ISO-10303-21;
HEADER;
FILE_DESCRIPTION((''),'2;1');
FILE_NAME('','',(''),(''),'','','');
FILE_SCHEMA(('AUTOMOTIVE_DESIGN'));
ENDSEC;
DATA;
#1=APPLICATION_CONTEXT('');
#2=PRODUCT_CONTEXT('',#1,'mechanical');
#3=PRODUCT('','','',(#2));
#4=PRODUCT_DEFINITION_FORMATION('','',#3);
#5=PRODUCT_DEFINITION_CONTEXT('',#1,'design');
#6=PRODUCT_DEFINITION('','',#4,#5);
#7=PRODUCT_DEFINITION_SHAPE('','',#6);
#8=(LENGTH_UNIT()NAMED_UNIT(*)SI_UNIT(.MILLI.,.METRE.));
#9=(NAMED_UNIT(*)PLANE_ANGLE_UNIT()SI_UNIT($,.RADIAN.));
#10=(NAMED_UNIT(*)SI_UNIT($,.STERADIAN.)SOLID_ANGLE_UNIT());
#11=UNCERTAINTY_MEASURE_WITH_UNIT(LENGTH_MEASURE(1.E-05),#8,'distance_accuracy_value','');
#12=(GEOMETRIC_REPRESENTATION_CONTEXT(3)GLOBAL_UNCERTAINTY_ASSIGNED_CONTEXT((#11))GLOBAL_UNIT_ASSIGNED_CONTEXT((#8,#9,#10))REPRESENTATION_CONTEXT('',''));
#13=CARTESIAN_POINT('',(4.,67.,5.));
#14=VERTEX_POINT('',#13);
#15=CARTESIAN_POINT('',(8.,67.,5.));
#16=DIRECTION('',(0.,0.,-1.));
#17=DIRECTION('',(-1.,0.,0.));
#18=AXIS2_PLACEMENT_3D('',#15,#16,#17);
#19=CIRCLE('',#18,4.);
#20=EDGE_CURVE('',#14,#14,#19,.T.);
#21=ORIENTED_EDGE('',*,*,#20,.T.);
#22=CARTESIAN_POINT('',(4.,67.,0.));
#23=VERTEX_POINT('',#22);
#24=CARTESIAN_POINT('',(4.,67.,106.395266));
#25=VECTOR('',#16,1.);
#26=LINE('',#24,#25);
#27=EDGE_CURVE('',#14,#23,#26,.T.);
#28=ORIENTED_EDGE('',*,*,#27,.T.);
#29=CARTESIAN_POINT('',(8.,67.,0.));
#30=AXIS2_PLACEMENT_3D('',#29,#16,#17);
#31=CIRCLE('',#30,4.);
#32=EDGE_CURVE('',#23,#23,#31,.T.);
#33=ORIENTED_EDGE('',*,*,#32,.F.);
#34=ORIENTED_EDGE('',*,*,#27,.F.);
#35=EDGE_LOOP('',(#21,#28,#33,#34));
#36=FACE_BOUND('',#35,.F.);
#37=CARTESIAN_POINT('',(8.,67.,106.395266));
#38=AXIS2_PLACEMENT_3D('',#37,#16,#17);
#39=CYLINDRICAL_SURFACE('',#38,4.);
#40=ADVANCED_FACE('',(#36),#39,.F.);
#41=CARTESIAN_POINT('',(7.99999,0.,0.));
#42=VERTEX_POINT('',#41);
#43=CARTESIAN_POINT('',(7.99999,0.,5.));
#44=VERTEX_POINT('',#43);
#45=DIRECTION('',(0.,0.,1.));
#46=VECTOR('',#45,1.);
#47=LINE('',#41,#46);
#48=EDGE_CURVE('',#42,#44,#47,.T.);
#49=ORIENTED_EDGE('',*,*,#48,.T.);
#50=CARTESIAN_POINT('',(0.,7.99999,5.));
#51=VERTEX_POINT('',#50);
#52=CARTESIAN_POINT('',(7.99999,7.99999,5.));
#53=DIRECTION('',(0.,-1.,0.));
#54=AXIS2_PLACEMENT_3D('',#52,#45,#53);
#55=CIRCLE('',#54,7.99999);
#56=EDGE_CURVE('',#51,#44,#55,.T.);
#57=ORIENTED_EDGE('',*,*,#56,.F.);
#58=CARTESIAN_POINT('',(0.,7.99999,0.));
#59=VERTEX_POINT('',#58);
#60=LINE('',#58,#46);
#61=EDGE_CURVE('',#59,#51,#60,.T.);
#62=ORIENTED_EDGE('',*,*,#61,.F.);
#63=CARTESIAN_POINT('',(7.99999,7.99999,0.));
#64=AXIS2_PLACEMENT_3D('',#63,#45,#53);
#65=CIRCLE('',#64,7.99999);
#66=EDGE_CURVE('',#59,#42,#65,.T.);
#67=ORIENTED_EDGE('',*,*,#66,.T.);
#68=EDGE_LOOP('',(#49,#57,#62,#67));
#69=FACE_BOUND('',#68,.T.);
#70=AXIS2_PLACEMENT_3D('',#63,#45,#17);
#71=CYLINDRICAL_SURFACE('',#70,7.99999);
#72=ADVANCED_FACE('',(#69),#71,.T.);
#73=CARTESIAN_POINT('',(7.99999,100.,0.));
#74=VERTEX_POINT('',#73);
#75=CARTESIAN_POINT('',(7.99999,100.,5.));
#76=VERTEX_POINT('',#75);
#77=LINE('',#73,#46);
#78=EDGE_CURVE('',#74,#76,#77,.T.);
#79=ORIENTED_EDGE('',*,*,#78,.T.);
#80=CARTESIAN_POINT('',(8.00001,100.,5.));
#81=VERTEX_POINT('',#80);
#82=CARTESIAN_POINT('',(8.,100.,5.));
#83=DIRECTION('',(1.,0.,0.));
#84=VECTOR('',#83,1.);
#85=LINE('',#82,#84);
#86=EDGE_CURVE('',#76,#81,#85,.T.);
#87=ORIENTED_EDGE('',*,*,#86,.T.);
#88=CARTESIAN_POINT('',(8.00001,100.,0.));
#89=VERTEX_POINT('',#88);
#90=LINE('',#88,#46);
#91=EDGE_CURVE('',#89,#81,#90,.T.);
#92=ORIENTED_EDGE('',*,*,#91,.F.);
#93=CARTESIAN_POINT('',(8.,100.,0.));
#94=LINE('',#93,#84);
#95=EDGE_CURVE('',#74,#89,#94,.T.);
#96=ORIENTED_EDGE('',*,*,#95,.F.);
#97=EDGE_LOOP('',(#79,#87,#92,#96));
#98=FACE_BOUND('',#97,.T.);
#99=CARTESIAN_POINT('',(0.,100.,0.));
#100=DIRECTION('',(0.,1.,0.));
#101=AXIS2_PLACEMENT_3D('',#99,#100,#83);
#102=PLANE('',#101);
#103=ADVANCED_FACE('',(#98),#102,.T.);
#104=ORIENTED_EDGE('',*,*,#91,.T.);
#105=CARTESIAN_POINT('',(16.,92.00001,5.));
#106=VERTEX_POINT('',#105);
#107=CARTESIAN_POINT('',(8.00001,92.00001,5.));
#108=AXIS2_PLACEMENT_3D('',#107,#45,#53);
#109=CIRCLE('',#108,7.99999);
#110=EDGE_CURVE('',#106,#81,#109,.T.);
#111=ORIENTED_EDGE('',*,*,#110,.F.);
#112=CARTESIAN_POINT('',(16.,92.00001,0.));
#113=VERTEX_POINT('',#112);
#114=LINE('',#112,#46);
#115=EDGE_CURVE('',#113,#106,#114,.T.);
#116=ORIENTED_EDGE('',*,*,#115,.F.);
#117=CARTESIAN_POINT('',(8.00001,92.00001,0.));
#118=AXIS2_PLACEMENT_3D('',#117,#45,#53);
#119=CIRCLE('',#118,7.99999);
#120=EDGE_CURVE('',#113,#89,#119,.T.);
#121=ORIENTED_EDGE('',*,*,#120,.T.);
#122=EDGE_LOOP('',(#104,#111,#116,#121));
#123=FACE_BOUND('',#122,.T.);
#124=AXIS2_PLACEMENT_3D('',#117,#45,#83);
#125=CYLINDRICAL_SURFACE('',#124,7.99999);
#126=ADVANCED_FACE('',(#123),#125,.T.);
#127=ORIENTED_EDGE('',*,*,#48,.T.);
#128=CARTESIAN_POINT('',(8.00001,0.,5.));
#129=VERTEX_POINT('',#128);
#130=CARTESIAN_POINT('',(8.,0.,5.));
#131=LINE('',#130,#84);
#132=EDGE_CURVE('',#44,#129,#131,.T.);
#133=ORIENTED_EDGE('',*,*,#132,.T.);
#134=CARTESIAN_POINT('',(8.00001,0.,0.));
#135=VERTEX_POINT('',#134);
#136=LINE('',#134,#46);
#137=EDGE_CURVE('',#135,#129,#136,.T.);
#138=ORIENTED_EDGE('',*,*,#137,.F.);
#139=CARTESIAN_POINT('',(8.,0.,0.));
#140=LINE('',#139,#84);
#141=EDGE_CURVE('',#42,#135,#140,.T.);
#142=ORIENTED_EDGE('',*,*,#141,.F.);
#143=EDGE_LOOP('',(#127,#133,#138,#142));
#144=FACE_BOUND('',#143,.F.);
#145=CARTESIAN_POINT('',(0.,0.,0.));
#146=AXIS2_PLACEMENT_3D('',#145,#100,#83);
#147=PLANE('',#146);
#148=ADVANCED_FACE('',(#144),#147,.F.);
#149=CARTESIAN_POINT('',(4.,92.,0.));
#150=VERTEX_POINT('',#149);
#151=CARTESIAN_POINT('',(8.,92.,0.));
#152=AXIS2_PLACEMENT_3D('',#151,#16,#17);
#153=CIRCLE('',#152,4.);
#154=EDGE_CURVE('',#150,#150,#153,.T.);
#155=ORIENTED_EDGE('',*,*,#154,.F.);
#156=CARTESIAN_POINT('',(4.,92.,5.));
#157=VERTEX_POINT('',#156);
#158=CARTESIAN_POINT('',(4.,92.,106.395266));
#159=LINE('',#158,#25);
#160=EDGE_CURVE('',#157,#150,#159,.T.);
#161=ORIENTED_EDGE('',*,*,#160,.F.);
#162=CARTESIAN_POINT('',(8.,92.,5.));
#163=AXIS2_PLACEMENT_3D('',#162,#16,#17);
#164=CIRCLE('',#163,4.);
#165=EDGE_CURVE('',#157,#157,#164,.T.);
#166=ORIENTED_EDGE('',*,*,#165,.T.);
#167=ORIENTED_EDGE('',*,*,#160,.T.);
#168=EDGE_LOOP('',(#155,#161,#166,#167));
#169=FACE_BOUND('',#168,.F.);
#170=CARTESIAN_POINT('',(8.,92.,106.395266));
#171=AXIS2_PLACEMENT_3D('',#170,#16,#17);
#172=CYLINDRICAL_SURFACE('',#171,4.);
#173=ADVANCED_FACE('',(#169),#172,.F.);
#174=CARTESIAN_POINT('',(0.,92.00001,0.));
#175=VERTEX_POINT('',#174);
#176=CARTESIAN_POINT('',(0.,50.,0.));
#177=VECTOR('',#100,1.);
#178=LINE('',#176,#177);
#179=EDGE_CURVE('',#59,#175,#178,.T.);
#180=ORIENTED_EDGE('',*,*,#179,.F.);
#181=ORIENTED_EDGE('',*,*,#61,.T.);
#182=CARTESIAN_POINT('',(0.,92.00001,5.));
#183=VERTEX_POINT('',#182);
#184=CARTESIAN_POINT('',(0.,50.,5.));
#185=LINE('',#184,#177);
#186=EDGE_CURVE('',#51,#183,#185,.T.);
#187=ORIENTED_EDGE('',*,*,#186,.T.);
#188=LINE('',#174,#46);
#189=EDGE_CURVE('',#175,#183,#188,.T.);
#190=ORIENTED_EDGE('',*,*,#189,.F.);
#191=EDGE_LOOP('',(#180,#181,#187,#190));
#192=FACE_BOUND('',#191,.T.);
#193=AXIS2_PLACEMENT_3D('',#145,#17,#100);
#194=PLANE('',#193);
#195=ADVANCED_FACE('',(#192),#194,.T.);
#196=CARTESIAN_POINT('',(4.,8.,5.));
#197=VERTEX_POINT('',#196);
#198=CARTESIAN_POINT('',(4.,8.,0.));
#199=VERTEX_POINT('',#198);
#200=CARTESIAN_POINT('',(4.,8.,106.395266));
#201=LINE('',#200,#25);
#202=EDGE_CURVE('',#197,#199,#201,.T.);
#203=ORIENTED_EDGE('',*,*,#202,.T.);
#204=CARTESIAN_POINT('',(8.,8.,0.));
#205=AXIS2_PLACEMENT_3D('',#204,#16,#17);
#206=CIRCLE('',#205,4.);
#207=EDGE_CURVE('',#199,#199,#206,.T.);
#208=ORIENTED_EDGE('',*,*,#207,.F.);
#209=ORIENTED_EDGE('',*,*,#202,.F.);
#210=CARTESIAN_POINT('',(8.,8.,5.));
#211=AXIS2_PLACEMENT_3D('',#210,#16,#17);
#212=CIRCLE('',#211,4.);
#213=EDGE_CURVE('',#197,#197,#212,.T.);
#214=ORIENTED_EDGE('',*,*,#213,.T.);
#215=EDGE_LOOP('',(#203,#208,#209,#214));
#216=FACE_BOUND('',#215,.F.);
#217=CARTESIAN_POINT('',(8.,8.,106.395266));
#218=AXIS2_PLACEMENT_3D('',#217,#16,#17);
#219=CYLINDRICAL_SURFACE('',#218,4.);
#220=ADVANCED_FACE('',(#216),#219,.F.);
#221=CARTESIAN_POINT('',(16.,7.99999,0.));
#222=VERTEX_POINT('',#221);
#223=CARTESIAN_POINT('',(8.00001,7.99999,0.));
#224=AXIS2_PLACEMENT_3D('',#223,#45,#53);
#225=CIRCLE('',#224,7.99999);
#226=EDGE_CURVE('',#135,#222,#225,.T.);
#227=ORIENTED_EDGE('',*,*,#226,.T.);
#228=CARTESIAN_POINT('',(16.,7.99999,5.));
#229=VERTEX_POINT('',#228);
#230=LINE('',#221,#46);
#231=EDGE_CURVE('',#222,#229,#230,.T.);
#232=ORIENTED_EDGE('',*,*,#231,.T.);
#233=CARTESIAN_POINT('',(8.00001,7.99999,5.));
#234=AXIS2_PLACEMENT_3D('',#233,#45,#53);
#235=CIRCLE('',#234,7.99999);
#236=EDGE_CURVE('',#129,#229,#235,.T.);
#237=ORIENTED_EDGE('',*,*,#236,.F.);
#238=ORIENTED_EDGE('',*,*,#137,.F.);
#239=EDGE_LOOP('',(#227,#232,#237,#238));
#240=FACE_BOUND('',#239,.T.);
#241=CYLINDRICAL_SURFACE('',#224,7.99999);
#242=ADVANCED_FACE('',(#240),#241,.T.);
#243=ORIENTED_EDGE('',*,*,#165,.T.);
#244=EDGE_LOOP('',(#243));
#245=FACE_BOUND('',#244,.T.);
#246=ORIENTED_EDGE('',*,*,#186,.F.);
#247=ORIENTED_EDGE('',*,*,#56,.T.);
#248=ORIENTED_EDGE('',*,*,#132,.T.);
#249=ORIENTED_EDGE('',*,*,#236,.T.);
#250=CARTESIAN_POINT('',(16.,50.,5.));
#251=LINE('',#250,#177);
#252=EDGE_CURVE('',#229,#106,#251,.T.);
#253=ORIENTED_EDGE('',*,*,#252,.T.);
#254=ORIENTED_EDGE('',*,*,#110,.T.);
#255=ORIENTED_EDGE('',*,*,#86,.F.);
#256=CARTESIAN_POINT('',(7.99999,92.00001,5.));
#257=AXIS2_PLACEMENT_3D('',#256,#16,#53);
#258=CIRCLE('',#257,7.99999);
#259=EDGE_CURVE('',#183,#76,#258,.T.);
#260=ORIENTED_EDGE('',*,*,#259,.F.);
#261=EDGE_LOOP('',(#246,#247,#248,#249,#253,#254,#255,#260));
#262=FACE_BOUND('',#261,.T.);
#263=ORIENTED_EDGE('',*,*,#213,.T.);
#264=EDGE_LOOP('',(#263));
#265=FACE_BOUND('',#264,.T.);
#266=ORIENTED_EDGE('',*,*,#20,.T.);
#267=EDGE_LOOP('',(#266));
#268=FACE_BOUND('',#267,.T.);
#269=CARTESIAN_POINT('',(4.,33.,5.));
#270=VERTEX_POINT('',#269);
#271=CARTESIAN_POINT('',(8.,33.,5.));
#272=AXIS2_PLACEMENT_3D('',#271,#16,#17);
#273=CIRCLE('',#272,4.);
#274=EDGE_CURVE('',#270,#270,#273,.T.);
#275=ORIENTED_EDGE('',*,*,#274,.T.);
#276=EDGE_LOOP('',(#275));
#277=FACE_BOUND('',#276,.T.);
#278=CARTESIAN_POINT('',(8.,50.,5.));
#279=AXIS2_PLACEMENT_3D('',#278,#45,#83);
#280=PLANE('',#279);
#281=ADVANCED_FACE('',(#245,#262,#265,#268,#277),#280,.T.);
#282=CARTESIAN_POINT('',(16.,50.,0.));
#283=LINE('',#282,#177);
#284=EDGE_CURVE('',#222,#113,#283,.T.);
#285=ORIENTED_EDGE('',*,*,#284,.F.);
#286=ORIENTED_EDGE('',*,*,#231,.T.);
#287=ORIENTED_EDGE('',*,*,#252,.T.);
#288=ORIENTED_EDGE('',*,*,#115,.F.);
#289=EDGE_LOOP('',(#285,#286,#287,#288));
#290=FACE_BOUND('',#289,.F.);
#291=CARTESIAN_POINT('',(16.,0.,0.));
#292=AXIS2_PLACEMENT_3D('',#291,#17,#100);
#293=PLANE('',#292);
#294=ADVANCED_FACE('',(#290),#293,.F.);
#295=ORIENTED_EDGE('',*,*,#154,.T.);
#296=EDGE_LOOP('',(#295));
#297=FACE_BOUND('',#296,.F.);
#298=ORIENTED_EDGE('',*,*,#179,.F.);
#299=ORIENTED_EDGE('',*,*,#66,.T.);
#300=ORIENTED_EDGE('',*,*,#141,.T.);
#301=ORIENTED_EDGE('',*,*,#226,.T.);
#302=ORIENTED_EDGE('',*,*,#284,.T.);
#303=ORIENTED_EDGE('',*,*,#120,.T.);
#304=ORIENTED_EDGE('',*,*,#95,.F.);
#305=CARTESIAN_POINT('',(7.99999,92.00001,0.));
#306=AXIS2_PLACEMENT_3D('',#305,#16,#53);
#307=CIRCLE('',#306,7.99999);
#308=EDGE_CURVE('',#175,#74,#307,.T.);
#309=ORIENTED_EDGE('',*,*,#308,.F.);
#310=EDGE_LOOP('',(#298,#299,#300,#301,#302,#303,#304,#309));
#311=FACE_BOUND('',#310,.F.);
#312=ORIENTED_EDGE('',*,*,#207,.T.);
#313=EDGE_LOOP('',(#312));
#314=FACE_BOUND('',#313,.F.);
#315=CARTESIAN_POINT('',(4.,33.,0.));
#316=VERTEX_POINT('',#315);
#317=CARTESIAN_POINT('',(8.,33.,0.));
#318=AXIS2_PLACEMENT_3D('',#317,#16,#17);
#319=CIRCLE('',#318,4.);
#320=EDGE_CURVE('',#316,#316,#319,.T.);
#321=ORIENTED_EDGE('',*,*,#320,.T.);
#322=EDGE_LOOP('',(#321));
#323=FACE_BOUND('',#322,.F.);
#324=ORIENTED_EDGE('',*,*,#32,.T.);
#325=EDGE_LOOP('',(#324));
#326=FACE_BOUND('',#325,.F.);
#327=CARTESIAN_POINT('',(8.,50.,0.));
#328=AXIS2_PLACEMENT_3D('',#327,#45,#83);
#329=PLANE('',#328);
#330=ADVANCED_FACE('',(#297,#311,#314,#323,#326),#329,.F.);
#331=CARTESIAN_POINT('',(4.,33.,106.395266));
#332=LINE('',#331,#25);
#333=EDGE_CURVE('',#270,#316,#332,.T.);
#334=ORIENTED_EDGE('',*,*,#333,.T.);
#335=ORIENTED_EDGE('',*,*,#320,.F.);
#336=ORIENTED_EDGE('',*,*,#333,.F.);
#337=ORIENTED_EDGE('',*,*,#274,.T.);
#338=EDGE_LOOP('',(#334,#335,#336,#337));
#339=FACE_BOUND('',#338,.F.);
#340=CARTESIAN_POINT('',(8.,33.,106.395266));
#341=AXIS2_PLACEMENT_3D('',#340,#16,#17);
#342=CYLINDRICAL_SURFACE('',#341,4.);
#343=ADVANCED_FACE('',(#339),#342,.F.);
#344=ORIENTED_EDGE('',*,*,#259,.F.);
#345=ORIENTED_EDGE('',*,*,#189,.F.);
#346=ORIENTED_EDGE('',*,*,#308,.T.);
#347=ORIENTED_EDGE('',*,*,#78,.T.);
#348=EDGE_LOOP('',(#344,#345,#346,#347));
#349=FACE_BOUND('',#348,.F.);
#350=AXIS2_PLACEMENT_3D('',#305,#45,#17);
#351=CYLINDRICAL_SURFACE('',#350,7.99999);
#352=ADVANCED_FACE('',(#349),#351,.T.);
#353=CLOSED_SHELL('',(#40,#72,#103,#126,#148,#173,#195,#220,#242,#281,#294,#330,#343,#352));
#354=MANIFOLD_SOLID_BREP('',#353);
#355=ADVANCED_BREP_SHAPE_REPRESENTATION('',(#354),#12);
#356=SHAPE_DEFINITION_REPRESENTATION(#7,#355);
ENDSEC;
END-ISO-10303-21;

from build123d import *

# Parameters (mm, degrees)
F0_W     = 16
F0_H     = 100
F1_DEPTH = 5
F2_R     = 7.99999
F4_D     = 8


# Not quite as in the source:
# - a fillet or chamfer is up to 0.001 mm smaller than in the source, because OpenCascade refuses the exact size


with BuildPart() as f1:
    # F0 (on Top) → F1 (new body)
    with BuildSketch(Plane.XY):
        with Locations((8, 50)):
            Rectangle(F0_W, F0_H)
    extrude(amount=F1_DEPTH)

    # F2 (radius 8 in the source; OpenCascade refuses exactly that, so slightly less here)
    f2_edges = [f1.edges().sort_by_distance(p)[0] for p in [
        (16, 0, 2.5),
        (0, 0, 2.5),
        (16, 100, 2.5),
        (0, 100, 2.5),
    ]]
    fillet(f2_edges, radius=F2_R)

    # F4 (through all)
    with Locations(Plane.XY.offset(5)):
        with Locations((8, 92), (8, 67), (8, 33), (8, 8)):
            Hole(F4_D / 2)


solid = f1.part
